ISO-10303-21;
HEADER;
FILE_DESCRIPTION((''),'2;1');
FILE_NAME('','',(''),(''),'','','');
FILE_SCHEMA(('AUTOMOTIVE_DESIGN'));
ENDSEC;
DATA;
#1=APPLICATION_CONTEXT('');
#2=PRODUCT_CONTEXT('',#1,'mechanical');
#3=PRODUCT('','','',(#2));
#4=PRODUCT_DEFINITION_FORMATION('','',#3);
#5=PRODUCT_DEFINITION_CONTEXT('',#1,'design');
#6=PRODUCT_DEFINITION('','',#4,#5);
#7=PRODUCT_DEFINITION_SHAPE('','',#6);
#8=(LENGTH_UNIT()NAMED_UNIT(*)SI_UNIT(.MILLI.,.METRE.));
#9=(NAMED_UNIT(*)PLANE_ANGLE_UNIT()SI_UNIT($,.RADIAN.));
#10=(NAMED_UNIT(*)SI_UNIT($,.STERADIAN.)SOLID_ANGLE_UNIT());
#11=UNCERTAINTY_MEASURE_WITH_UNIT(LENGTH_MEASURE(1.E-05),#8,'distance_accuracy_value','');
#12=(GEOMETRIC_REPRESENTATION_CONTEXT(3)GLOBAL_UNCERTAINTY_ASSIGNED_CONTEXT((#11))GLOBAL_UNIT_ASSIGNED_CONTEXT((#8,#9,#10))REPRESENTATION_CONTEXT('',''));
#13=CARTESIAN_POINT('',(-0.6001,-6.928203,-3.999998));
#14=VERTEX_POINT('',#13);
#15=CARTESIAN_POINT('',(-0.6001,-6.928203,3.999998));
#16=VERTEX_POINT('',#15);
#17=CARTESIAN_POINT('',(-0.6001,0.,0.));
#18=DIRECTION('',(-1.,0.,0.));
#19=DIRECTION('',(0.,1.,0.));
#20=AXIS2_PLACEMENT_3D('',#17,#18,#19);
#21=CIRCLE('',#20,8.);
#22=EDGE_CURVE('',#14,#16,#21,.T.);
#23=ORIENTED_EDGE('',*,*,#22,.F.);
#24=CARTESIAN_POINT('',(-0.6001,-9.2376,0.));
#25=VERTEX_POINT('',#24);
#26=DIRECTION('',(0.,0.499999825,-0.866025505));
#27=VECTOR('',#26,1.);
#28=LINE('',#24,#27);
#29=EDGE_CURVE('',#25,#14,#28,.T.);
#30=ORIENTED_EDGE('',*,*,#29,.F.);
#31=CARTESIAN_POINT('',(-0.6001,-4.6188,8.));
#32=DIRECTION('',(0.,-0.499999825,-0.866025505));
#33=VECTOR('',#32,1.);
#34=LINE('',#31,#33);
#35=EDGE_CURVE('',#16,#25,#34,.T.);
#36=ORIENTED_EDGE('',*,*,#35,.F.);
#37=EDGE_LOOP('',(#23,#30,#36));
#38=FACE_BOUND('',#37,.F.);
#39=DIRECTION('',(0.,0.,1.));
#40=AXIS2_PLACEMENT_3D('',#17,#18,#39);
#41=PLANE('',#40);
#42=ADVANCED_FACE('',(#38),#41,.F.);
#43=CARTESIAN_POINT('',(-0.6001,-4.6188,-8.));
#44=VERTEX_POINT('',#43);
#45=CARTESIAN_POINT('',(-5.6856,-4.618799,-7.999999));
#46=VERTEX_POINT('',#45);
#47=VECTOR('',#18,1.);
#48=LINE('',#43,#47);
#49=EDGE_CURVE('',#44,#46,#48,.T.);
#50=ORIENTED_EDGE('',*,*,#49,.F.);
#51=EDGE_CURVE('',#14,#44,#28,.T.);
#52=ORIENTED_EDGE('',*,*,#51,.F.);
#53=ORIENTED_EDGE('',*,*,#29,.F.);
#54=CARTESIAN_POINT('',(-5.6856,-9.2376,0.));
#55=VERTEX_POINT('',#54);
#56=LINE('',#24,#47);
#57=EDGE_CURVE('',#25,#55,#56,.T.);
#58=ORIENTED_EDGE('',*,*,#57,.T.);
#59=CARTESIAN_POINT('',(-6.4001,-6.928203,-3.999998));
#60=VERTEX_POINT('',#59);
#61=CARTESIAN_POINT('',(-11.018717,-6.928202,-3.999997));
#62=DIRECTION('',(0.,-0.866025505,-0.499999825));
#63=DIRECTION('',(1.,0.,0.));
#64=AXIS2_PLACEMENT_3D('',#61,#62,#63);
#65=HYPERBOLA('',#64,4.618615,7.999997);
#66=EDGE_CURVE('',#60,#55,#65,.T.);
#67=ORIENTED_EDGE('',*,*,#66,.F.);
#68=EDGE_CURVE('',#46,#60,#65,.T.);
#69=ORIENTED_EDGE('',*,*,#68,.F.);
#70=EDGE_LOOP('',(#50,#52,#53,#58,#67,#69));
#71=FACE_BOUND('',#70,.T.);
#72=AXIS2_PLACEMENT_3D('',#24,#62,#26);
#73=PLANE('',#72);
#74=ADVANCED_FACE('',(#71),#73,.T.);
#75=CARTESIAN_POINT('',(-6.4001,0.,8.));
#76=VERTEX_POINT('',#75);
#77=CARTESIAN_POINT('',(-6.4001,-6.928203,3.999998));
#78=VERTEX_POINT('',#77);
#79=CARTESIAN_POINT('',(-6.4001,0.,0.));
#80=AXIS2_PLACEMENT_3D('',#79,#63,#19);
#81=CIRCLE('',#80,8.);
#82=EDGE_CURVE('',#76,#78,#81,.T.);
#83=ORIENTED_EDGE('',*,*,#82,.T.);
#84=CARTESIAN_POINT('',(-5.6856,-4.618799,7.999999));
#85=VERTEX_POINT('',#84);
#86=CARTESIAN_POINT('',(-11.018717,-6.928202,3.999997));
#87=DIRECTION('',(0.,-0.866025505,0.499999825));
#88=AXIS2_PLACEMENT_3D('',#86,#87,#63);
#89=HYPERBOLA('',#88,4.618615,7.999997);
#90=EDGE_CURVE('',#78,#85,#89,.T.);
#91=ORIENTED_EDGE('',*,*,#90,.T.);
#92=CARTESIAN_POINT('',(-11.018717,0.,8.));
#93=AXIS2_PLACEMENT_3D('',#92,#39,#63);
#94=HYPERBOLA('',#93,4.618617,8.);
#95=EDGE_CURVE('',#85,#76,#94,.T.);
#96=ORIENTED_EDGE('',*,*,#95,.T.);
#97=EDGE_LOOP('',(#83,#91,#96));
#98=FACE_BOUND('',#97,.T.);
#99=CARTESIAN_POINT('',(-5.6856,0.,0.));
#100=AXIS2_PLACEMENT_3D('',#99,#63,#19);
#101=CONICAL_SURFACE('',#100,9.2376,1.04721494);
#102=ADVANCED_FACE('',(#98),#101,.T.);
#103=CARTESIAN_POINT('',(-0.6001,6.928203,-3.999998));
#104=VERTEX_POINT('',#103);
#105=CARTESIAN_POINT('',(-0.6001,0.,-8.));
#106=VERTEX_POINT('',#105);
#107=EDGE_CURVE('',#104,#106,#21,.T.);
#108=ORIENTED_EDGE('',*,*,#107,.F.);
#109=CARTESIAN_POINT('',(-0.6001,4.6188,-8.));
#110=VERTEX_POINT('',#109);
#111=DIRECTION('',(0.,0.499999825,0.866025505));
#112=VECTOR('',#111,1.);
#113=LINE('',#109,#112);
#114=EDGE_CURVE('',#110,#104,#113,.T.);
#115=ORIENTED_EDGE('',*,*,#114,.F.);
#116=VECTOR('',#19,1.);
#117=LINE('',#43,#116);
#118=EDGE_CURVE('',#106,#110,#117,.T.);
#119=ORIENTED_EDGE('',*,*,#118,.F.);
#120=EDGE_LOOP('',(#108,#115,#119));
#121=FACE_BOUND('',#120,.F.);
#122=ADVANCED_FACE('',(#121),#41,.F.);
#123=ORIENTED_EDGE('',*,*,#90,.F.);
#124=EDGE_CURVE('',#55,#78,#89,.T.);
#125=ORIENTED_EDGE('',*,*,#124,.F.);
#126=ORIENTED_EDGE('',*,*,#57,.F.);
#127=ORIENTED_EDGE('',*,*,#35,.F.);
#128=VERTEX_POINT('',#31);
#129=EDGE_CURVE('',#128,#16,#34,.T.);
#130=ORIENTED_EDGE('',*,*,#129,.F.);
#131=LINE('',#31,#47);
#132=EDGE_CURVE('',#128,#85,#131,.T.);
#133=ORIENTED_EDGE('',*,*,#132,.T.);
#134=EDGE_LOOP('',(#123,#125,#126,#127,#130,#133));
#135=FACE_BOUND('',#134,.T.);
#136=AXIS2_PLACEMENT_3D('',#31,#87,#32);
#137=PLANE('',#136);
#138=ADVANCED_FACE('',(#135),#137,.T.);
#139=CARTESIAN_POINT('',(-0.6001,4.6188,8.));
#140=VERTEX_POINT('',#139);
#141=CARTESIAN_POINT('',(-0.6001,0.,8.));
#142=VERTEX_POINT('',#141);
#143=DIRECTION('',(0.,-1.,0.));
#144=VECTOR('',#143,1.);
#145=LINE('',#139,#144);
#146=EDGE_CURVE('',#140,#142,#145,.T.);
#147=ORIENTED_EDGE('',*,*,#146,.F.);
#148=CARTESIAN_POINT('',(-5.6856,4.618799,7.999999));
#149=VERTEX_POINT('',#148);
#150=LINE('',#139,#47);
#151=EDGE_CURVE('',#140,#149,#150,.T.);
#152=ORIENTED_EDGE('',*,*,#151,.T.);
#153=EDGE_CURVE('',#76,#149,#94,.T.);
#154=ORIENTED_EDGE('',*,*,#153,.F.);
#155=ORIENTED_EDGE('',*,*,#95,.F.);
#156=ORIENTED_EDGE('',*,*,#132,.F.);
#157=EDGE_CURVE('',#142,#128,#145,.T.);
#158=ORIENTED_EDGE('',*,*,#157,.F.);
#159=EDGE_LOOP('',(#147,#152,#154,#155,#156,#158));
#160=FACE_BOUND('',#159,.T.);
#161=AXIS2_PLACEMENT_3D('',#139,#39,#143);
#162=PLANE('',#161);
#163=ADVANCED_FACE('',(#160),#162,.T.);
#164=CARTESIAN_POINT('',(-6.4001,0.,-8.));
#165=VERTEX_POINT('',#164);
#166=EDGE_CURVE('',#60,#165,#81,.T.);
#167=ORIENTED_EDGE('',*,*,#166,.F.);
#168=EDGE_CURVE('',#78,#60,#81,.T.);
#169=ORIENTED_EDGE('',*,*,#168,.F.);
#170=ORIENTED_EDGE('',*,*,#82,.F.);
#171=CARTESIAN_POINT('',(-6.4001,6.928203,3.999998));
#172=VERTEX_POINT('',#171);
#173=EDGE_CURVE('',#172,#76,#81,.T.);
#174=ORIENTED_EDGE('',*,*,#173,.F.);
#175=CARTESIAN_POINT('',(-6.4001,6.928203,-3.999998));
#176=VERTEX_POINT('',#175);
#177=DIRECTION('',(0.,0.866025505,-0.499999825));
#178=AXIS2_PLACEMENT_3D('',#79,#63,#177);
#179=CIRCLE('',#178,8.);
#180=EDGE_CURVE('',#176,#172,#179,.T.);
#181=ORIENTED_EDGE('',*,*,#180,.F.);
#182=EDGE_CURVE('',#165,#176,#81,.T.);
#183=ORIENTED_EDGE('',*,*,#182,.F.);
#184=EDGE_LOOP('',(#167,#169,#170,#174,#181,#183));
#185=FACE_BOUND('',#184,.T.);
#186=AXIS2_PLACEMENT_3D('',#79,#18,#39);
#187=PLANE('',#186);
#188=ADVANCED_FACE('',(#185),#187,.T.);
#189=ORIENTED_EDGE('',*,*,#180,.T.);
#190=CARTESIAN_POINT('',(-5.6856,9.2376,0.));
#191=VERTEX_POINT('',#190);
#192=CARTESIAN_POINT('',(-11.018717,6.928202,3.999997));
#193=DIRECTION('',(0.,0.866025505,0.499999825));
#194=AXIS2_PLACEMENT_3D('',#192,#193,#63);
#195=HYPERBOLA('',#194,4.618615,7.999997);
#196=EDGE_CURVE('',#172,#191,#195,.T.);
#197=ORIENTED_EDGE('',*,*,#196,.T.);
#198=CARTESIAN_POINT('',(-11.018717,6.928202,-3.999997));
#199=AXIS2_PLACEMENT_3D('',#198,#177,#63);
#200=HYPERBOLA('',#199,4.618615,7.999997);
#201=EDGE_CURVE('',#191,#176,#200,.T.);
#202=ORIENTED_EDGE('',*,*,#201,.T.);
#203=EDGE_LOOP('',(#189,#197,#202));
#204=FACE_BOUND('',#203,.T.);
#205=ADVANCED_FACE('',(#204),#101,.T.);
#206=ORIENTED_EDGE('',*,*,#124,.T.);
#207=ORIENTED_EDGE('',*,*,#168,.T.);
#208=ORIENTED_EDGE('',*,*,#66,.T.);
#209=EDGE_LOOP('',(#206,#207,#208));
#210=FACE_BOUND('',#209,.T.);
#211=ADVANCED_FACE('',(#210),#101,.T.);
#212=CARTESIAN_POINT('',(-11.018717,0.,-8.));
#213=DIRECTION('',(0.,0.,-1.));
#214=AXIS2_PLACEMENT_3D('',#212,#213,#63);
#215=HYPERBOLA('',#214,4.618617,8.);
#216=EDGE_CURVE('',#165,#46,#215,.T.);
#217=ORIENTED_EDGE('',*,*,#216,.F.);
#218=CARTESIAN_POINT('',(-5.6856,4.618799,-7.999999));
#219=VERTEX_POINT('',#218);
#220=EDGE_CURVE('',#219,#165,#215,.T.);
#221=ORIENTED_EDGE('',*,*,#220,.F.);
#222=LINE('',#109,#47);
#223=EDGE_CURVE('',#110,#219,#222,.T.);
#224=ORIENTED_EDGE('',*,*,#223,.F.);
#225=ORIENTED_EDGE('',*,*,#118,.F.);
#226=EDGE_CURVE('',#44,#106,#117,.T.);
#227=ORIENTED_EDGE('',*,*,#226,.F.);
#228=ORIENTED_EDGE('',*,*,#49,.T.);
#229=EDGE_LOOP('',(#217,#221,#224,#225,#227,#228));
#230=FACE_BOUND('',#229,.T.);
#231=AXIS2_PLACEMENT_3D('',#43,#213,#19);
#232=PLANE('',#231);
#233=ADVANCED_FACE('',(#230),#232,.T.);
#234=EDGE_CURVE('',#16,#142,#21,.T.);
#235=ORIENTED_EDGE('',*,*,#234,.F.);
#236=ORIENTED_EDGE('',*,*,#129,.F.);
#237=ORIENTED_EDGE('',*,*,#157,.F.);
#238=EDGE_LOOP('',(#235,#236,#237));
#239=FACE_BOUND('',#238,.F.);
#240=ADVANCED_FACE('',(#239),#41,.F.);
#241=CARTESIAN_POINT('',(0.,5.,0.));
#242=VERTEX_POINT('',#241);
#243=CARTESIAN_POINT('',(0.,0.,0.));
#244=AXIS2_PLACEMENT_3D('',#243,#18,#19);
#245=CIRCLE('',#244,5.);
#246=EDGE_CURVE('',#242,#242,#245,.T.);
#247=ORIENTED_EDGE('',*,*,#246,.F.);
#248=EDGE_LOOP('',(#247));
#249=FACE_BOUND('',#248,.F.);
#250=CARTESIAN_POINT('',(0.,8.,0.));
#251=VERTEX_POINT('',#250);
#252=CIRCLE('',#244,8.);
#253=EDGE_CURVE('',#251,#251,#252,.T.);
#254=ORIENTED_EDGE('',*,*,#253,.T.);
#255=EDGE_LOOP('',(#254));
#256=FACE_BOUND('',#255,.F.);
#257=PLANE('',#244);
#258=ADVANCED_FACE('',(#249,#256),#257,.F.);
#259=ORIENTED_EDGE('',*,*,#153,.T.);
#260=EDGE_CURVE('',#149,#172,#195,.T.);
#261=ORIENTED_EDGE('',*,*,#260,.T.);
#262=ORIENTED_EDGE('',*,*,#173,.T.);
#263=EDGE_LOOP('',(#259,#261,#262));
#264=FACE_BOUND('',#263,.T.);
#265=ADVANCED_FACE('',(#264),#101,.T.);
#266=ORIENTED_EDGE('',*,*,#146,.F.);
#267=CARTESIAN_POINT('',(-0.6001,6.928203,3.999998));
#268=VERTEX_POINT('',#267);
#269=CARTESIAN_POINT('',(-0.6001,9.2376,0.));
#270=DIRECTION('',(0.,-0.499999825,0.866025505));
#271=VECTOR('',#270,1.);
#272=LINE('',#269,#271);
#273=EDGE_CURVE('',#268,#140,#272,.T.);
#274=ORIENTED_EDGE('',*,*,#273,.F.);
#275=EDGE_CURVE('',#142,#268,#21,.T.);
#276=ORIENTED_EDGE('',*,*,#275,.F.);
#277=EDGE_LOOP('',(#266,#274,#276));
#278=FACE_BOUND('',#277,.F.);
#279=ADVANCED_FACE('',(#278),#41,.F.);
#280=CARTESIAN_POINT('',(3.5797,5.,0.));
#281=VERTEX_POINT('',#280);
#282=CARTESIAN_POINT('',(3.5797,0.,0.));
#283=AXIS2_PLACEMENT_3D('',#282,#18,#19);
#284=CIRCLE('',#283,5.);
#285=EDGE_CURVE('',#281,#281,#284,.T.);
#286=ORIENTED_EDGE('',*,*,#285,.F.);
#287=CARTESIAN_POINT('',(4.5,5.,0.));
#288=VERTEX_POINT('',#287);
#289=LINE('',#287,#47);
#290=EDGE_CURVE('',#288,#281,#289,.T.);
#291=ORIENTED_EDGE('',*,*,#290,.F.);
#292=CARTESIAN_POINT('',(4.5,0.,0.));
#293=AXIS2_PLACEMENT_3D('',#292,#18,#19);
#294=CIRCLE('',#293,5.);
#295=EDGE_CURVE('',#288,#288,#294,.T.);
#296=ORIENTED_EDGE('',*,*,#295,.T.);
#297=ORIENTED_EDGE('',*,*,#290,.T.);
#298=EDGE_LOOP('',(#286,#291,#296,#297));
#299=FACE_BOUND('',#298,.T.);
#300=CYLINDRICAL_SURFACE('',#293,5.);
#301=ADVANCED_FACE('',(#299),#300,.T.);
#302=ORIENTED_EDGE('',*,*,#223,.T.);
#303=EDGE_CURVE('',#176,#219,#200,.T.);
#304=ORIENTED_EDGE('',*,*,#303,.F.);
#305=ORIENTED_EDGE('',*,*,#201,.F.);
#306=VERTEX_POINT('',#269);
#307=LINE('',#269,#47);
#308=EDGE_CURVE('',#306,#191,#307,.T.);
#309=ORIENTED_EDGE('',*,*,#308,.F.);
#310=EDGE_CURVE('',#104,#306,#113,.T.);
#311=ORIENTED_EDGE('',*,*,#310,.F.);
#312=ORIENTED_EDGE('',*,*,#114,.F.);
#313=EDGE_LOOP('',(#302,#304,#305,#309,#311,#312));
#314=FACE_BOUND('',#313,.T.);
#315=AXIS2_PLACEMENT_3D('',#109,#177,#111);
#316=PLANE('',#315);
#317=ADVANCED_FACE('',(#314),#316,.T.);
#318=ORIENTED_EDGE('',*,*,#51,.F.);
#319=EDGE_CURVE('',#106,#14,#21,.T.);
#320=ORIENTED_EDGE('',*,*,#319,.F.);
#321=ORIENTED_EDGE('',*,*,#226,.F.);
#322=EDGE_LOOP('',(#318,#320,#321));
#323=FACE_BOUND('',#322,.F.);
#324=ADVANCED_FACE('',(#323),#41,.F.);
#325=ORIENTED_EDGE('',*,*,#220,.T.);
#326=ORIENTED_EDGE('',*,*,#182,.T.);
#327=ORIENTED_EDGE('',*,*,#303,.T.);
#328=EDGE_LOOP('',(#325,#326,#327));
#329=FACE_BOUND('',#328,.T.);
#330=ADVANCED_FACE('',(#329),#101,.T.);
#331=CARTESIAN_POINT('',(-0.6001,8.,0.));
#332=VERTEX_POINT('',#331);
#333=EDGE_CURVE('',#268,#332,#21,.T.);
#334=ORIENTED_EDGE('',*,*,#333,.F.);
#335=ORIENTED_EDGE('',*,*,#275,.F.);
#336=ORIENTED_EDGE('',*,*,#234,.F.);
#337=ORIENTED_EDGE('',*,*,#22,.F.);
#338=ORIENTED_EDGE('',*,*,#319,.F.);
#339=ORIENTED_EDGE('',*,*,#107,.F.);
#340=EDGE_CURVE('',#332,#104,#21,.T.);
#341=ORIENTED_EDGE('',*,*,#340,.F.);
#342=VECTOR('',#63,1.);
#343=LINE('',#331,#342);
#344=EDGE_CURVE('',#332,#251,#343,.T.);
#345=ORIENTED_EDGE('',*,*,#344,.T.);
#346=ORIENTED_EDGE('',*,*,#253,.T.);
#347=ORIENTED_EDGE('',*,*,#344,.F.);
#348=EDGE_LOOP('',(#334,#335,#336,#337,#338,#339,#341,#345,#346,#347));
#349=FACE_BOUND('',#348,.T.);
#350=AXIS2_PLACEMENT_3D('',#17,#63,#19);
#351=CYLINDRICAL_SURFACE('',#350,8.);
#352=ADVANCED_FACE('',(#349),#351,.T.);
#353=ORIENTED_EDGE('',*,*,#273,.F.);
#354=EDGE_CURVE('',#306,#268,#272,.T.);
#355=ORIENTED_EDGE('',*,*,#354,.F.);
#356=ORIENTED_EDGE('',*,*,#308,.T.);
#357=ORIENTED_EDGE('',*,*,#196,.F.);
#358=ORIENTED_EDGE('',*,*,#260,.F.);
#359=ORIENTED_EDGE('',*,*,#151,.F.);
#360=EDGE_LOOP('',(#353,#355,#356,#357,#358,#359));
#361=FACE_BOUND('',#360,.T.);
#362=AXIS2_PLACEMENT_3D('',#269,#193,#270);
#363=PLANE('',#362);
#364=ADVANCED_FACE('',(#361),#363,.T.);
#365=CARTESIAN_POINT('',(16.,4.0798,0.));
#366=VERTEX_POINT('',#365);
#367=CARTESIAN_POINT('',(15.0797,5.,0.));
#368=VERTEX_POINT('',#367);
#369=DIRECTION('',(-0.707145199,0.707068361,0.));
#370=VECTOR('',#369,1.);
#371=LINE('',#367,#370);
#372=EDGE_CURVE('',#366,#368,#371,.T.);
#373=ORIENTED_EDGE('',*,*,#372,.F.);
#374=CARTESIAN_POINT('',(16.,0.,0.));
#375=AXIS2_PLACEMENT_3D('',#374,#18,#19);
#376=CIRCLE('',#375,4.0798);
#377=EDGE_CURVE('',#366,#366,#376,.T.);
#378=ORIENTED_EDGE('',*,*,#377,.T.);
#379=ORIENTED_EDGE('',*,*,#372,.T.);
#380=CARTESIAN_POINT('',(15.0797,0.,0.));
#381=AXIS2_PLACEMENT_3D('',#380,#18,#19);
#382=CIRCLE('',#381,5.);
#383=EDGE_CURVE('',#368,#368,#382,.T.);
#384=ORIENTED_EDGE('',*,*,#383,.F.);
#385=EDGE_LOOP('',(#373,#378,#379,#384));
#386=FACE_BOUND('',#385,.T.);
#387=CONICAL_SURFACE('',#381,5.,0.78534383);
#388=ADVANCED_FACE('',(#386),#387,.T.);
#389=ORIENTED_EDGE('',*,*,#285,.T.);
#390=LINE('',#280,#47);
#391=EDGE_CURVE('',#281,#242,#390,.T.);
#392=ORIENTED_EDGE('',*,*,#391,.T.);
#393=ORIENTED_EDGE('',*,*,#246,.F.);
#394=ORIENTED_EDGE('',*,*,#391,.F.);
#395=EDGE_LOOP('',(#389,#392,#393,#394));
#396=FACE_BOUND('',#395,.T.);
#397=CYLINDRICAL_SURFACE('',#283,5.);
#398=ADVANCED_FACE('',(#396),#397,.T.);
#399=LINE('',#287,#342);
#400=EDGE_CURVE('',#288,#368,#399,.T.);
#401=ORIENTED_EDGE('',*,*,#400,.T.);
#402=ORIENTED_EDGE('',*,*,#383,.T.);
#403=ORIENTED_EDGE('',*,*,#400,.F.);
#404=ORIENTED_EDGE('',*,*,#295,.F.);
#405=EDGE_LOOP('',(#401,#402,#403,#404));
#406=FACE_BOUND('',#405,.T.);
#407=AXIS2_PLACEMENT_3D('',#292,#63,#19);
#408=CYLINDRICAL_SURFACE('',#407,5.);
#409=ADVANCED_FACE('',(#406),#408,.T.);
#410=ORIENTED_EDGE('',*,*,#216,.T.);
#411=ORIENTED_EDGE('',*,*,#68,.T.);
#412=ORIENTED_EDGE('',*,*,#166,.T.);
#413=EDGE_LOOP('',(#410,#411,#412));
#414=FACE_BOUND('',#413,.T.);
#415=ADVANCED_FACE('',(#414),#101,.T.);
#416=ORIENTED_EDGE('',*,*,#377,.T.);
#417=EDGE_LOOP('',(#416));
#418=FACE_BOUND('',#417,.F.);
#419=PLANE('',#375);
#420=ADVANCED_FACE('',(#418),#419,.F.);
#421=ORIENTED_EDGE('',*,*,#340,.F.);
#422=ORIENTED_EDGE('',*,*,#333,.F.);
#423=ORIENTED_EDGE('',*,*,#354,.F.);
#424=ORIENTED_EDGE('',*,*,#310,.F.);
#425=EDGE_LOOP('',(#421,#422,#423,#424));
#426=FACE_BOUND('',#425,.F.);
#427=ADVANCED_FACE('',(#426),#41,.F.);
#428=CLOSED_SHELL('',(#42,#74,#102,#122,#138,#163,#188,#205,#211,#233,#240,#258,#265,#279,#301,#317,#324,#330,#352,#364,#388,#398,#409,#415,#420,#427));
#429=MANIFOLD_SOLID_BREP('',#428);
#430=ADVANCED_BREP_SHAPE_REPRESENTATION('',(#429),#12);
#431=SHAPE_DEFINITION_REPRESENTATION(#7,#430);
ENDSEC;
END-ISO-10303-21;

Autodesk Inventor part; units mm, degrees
ref_plane "YZ Plane" through (0, 0, 0) normal (1, 0, 0) x (0, 1, 0)
ref_plane "XZ Plane" through (0, 0, 0) normal (0, 1, 0) x (-1, 0, 0)
sketch "Sketch1" plane through (0, 0, 0) normal (0, 0, 1) x (1, 0, 0)
  line L0 (0, 8) -> (0, 5)
  line L1 (4.5, 5) -> (16, 5)
  line L2 (16, 5) -> (16, 0)
  line L3 (16, 0) -> (-0.6001, 0)
  line L4 (-3.9201, 0) -> (19.32, 0) projected
  line L5 (-0.6001, 0) -> (-0.6001, 8)
  line L6 (-0.6001, 8) -> (0, 8)
  line L7 (4.5, 5) -> (3.5797, 5)
  line L8 (3.5797, 5) -> (0, 5)
  line L9 (0, -1.6) -> (0, 9.6) projected
  dimension "d0" = 16
  dimension "d1" = 11.5
  dimension "d2" = 10
  dimension "d9" = 0.6001
  dimension "d10" = 16
  dimension "d13" = 0.9203
  dimension "d14" = 10
revolve "Body" add sketch "Sketch1" angle 360 about axis through (16, 0, 0) along (-1, 0, 0)
sketch "Sketch2" plane through (-0.6001, 0, 0) normal (-1, 0, 0) x (0, 0, 1)
  line L0 (0, 9.2376) -> (8, 4.6188)
  line L1 (8, 4.6188) -> (8, -4.6188)
  line L2 (8, -4.6188) -> (0, -9.2376)
  line L3 (0, -9.2376) -> (-8, -4.6188)
  line L4 (-8, -4.6188) -> (-8, 4.6188)
  line L5 (-8, 4.6188) -> (0, 9.2376)
  point P0 (0, 0)
  point P1 (0, 0)
  dimension "d11" = 16
extrude "Head" add sketch "Sketch2" along normal blind 5.8
sketch "Sketch4" plane through (0, 0, 0) normal (0, 0, 1) x (1, 0, 0)
  line L0 (-6.4001, 8) -> (-6.4001, 9.2376)
  line L1 (-6.4001, 9.2376) -> (-5.6856, 9.2376)
  line L2 (-5.6856, 9.2376) -> (-6.4001, 8)
  line L3 (-7.5601, 0) -> (0.5599, 0) projected
  line L4 (-0.6001, 9.2376) -> (-6.4001, 9.2376) projected
  line L5 (-6.4001, 4.6188) -> (-6.4001, 9.2376) projected
  dimension "d5" = 30
  dimension "d19" = 16
revolve "Chamfer1" cut sketch "Sketch4" angle 360 about axis through (-10, 0, 0) along (1, 0, 0)
thread "Thread" size "M10x1.5" class "6g" standard "ISO Metric profile" length 11.5
chamfer "Chamfer2" distance 0.9202 distance2 0.9203 1 edges at (16, -5, 0) measured on face at (16, -0.8193, 0.3214)
ref_plane "Work Plane1" through (1.525, 0, 0) normal (0, 0, 1) x (1, 0, 0)
equation "\"d11\" = SW"
equation "\"d3\" = KOH - SD"
equation "\"d15\" = GEL"
equation "\"d6\" = -0.5 * SPD + 0.5 * GD"
equation "\"d0\" = NLG"
equation "\"d1\" = GEL"
equation "\"d2\" = GD"
equation "\"d10\" = SD2"
equation "\"d14\" = BDM"
equation "\"d5\" = ANG1"
equation "\"d19\" = SW0"
equation "\"NLG\" = 16"
equation "\"GD\" = NND"
equation "\"BDM\" = NND"
equation "\"KOH\" = 6.4"
equation "\"GEL\" = 11.5"
equation "\"SW\" = 16"
equation "\"SW0\" = SW"
equation "\"SPD\" = NND - 1.2269 * PTC"
equation "\"SD2\" = SW"
equation "\"SD\" = 0.6"
equation "\"ANG1\" = 30deg"
equation "\"GAL\" = 0.61345 * PTC"
equation "\"GUL\" = 0.61345 * PTC"
equation "\"RR\" = 0.4"
equation "\"WFT\" = SD"
equation "\"GD1\" = THREADDIA - 1.2269 * PTC"
equation "\"SDH\" = SW"
equation "\"TOA\" = 30deg"
equation "\"FAWI\" = 45deg"
equation "\"PTC\" = 1.5"
equation "\"E0\" = 1.155 * SW"
equation "\"NND\" = 10"
equation "\"THREADDIA\" = 10"
properties part number "AS 1110 - M10 x 16" material "Steel, Mild"
